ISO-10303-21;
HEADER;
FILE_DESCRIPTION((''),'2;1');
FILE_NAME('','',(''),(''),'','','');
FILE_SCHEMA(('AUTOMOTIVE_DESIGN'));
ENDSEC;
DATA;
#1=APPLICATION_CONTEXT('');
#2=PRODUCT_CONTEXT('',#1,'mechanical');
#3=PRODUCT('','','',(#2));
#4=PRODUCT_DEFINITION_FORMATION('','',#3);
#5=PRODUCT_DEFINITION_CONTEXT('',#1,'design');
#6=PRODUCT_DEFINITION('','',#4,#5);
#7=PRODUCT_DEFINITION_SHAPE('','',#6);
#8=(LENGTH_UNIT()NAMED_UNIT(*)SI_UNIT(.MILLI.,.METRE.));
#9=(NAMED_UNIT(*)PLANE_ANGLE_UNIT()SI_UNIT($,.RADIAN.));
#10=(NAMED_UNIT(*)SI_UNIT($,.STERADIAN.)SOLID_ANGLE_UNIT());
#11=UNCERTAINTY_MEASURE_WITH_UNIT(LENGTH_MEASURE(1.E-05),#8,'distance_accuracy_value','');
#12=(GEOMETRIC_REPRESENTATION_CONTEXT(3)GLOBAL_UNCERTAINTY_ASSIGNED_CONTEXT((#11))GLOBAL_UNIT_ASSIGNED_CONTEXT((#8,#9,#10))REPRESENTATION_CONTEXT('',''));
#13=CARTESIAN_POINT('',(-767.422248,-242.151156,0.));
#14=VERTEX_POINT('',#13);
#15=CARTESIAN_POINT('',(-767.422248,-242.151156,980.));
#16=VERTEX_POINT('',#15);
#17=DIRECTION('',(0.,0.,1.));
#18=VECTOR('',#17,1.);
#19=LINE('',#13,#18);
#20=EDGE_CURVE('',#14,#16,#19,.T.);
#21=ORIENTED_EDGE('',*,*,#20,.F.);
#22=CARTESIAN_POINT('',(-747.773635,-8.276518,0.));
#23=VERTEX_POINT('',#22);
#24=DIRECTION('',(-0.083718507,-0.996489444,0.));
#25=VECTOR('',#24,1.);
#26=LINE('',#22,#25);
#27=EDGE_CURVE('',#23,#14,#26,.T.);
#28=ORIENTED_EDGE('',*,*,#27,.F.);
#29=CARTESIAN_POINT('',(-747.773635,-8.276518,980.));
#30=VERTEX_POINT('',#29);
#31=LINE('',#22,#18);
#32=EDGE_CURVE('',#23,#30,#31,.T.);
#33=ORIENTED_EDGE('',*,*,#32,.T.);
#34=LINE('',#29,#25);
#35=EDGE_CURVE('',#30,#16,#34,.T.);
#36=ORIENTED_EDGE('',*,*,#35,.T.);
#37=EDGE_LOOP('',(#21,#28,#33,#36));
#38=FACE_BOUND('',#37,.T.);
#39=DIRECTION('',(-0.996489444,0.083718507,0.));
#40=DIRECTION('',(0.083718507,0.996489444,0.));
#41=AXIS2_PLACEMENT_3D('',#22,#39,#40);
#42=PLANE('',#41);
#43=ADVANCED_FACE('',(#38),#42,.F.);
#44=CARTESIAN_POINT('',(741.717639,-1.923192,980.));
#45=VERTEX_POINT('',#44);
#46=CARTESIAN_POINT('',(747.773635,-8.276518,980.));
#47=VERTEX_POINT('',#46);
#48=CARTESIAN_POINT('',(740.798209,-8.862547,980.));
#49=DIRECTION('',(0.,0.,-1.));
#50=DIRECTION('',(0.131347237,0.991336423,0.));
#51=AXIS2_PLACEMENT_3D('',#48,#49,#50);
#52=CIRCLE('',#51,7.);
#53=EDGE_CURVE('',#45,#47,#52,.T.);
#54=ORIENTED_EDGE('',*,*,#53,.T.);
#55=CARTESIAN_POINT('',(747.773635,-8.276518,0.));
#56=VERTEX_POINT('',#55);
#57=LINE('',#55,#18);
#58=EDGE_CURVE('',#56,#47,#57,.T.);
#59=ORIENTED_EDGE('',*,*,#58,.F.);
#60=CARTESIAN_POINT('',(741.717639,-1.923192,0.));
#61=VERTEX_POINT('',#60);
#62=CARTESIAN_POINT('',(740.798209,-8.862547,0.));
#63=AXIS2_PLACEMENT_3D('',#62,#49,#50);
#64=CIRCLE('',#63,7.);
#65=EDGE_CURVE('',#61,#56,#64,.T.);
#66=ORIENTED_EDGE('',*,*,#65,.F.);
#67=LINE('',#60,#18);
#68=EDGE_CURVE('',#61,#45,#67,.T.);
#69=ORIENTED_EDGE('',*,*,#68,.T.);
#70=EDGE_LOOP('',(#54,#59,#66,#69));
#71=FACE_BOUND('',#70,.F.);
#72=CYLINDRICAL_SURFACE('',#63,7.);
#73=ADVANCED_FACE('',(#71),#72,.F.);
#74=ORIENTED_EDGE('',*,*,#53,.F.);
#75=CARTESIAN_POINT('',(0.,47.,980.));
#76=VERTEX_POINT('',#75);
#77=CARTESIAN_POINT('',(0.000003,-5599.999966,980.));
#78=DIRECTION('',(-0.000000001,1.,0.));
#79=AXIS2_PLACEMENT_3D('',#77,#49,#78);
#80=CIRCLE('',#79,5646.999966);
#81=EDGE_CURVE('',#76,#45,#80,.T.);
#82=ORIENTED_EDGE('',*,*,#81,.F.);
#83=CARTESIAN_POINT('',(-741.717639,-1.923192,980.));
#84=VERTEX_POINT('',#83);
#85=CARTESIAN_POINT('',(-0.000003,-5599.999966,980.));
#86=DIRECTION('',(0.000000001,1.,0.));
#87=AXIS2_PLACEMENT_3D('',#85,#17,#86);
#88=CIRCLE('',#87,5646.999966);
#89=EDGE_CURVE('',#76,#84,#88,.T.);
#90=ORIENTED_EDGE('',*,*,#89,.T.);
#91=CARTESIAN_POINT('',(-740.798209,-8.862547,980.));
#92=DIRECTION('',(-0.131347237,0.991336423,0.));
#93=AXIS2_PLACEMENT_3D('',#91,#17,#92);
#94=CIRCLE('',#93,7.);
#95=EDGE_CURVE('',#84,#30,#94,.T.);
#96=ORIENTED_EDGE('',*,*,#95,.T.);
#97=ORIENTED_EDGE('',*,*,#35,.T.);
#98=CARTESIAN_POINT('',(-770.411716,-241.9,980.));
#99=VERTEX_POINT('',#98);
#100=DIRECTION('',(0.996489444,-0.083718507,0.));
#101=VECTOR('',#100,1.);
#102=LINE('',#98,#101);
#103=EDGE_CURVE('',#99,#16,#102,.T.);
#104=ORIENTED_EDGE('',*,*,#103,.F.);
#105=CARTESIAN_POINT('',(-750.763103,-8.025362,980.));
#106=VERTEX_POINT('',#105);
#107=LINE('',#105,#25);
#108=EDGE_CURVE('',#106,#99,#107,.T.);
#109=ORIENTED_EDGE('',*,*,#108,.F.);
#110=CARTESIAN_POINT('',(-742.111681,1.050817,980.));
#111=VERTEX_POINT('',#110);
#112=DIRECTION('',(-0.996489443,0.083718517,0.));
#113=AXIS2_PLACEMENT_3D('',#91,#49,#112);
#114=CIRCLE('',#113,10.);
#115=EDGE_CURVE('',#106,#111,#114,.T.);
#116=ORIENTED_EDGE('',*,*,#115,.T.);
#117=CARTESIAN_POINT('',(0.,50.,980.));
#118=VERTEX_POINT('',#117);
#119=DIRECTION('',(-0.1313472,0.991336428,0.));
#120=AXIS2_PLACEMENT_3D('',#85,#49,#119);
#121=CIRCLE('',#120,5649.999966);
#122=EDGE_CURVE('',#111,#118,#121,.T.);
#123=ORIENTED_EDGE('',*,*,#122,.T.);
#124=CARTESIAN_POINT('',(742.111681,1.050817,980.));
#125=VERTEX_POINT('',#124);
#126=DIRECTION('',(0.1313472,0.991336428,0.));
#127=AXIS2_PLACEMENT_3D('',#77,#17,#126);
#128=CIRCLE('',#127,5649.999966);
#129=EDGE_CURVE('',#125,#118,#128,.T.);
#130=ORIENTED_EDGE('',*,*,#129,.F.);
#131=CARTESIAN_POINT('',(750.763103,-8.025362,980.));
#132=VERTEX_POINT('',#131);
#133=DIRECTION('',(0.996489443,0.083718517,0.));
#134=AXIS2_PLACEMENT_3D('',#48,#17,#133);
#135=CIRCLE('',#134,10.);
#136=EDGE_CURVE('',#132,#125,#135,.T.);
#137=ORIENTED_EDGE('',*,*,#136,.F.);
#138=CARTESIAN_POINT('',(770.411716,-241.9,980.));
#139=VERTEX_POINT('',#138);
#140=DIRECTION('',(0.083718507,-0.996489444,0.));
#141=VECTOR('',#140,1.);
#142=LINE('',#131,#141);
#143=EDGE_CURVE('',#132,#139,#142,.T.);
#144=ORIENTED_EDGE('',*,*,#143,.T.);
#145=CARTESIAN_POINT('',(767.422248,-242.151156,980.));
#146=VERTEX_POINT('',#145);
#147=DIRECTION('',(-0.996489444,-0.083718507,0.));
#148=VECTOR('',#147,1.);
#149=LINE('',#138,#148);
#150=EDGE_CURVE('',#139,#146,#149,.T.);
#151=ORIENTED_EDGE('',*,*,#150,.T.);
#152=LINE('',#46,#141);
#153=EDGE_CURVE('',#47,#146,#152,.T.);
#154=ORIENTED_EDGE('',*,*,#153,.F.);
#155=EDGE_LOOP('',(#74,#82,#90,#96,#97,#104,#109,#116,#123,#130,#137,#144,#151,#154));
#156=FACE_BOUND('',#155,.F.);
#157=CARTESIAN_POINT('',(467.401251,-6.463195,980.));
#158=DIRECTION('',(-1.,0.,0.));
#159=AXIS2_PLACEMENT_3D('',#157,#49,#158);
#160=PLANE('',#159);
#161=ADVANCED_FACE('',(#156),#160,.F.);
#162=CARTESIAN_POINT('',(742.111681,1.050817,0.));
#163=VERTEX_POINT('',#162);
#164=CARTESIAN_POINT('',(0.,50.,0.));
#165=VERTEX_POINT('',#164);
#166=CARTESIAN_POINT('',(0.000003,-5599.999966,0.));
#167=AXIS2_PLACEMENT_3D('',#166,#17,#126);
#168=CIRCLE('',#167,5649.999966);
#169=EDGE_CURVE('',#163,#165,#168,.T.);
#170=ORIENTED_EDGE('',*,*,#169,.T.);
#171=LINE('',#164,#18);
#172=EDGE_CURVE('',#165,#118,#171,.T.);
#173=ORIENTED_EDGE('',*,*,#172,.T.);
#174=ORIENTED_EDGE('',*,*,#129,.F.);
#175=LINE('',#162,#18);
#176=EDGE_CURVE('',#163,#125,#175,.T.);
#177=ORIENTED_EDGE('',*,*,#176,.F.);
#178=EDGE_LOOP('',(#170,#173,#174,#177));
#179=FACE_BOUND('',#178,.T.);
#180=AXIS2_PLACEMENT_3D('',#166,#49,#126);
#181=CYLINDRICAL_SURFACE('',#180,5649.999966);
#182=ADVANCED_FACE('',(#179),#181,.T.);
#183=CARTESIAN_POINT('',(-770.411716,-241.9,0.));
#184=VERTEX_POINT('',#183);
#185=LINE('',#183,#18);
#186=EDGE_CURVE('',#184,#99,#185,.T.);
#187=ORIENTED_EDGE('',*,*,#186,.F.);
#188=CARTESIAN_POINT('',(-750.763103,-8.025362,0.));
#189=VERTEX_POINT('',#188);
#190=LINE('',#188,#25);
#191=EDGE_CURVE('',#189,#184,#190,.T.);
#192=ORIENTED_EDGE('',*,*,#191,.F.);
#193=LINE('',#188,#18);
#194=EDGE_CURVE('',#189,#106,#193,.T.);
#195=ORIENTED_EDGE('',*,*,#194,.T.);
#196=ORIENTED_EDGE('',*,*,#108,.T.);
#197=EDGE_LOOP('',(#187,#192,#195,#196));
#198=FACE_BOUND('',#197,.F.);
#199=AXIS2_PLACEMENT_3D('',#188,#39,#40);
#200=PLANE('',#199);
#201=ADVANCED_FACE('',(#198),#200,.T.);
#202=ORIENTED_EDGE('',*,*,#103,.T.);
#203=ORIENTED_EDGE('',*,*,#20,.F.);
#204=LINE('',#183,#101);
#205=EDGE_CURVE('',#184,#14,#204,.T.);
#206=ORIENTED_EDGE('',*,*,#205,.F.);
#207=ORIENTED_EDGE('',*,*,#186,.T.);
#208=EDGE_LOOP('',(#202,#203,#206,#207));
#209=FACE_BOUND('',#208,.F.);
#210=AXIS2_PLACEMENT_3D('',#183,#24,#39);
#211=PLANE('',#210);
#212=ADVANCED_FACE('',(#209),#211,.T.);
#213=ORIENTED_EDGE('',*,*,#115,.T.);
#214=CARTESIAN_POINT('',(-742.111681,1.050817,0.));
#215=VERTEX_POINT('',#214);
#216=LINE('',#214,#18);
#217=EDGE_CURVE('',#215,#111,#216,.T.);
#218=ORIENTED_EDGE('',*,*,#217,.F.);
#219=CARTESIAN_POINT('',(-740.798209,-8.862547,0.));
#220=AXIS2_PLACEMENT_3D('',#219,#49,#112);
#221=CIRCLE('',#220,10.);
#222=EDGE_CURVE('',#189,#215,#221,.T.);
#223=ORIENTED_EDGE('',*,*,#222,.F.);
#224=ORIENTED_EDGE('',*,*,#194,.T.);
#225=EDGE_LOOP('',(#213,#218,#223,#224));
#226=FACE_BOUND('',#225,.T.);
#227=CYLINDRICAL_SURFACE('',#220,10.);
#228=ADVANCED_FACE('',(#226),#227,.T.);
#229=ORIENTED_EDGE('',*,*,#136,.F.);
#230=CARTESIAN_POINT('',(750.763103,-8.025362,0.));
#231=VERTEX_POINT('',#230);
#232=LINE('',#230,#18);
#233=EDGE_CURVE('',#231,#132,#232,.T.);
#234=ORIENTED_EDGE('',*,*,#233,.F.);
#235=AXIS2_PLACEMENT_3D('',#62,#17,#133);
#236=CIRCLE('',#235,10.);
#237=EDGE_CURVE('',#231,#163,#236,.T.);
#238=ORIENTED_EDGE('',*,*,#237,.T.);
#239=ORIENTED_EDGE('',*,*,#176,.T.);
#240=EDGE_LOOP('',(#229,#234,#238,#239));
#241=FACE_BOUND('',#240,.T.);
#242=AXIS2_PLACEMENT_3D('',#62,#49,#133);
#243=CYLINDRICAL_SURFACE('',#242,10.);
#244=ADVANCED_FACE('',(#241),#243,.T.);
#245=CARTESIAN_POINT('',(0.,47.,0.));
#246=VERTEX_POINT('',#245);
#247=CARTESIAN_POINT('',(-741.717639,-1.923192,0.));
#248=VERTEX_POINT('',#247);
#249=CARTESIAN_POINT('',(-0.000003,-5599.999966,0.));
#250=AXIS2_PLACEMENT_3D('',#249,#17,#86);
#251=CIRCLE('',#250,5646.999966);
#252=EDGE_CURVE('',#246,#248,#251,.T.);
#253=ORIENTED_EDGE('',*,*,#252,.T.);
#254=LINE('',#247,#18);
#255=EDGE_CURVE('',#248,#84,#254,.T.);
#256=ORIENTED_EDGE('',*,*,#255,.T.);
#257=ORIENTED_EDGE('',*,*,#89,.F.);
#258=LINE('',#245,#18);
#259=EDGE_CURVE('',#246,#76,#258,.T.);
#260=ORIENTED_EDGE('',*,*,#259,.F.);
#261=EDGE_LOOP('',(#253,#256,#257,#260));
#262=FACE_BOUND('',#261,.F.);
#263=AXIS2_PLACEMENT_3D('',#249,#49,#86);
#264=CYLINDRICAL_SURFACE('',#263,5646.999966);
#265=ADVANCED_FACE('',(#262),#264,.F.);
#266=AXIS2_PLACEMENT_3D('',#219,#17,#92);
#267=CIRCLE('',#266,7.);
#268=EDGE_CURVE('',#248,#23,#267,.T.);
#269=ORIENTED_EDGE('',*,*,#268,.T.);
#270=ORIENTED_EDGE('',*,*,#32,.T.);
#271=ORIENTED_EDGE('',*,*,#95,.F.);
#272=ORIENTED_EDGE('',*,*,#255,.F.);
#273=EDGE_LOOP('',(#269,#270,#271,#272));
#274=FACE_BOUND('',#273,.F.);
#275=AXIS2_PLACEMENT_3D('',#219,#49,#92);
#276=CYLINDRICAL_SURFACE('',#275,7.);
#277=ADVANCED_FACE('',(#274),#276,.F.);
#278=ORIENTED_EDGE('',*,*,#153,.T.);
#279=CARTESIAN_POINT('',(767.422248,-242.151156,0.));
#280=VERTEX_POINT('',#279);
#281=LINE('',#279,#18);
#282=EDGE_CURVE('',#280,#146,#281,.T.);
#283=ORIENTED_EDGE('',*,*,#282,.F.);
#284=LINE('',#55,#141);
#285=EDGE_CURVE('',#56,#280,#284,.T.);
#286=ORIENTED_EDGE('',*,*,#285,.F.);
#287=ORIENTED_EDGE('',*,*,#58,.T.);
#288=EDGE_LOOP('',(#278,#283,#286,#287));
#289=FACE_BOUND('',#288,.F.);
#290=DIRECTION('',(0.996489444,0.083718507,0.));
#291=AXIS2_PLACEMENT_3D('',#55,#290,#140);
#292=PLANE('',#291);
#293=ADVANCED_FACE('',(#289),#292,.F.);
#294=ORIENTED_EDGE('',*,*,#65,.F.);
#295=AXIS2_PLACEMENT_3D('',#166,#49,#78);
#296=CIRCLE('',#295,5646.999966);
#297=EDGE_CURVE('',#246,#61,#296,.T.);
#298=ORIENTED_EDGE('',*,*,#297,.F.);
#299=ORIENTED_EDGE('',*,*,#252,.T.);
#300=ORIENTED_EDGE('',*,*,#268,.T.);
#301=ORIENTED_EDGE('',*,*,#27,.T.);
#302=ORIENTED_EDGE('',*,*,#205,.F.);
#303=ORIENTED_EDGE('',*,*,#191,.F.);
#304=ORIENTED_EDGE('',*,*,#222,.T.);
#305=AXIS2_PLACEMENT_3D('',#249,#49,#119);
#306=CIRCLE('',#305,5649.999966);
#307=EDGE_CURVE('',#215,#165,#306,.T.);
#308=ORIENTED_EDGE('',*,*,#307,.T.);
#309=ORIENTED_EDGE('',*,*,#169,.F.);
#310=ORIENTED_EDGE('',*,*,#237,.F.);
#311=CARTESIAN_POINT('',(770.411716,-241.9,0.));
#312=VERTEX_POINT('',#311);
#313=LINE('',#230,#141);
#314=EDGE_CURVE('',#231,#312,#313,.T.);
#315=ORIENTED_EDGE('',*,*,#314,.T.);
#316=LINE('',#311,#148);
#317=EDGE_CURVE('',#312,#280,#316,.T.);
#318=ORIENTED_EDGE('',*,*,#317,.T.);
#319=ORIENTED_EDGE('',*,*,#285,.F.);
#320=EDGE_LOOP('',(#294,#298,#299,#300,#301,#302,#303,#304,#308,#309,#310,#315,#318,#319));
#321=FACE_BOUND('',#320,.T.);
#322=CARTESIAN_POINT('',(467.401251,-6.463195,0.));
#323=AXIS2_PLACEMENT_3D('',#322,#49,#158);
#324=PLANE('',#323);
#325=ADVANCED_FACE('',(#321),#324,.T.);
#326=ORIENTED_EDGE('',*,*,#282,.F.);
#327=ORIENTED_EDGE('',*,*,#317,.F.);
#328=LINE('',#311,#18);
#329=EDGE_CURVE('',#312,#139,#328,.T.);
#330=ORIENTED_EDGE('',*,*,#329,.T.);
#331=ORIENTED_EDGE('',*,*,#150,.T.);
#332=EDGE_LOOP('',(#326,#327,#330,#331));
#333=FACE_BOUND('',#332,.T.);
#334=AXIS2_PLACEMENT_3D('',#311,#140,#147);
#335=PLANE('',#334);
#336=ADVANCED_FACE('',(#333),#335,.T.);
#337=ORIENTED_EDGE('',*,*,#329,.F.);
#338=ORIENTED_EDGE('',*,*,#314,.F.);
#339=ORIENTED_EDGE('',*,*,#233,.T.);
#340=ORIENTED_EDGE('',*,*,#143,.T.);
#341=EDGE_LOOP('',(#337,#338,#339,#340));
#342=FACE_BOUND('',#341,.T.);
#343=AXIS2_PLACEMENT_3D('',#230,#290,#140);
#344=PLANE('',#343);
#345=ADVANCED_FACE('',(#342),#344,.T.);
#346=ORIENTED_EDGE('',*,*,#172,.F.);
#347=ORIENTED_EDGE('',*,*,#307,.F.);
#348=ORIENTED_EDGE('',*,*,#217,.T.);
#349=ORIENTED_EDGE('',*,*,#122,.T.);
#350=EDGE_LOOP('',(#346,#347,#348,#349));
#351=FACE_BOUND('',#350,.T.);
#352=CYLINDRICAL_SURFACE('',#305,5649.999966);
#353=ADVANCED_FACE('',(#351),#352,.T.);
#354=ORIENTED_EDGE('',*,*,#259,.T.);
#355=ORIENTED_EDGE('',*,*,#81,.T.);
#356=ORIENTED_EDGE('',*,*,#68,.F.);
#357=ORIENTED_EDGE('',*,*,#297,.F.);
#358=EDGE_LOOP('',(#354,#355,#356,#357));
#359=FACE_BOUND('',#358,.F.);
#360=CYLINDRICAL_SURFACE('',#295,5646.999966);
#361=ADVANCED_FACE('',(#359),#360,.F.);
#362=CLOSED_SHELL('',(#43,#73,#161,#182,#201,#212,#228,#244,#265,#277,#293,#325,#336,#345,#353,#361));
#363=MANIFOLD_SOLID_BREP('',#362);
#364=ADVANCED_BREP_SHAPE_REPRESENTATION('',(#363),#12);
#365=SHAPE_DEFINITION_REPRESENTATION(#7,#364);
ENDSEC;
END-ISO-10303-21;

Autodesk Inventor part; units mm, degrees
ref_plane "YZ Plane" through (0, 0, 0) normal (1, 0, 0) x (0, 1, 0)
ref_plane "XZ Plane" through (0, 0, 0) normal (0, 1, 0) x (-1, 0, 0)
ref_plane "XY Plane" through (0, 0, 0) normal (0, 0, 1) x (1, 0, 0)
sketch "Sketch1" plane through (0, 0, 0) normal (0, 0, 1) x (1, 0, 0)
  line L0 (-750, 0) -> (750, 0) construction
  line L1 (750, 0) -> (750, -2700) construction
  line L2 (750, -2700) -> (-750, -2700) construction
  line L3 (-750, -2700) -> (-750, 0) construction
  line L4 (800, 50) -> (-800, 50) construction
  line L5 (-800, 50) -> (-800, -2750) construction
  line L6 (-800, -2750) -> (800, -2750) construction
  line L7 (800, -2750) -> (800, 50) construction
  line L8 (-850, 100) -> (850, 100) construction
  line L9 (850, 100) -> (850, -2800) construction
  line L10 (850, -2800) -> (-850, -2800) construction
  line L11 (-850, -2800) -> (-850, 100) construction
  arc A0 (750, 0) -> (742.111681, 1.050817) centre (0, -5600) ccw construction
  line L12 (-750, -2100) -> (750, -2100) construction
  line L13 (115.485997, -2697.8227) -> (750, -2100) construction
  arc A1 (750, -2100) -> (750, 0) centre (-10250, -1050) ccw construction
  arc A2 (110, -2700) -> (115.485997, -2697.8227) centre (110, -2692) ccw construction
  arc A3 (742.111681, 1.050817) -> (0, 50) centre (0, -5600) ccw
  line L14 (0, 100) -> (0, 50) construction
  line L15 (0, -2700) -> (0, -2697) construction
  line L16 (0, 47) -> (0, 0) construction
  line L17 (0, 50) -> (0, 47) construction
  line L18 (750.763103, -8.025362) -> (770.411716, -241.9)
  arc A4 (750.763103, -8.025362) -> (742.111681, 1.050817) centre (740.798209, -8.862547) ccw
  point P0 (0, -2750)
  dimension "d54" = 1500
  dimension "d55" = 2700
  dimension "d58" = 2100
  dimension "d83" = 8
  dimension "d113" = 50
  dimension "d114" = 50
  dimension "d115" = 3
  dimension "d121" = 10
  dimension "d122" = 241.9
contour flange "Contour Flange2" sketch "Sketch1" thickness 3 bend radius 5 width 980 along (0, 0, 1) mid plane no both sides no wall seen from (760.58741, -124.962681, 0) lies toward (-0.9964894, -0.0837185, 0) curves L18 A4 A3
bend "Bend2"
corner "Corner2"
mirror "Mirror2" about plane through (0, 0, 0) normal (1, 0, 0)
sketch "Sketch2" plane through (747.773635, -8.276518, 0) normal (-0.9964894, -0.0837185, 0) x (0, 0, 1)
  line L0 (972.134927, -233.668955) -> (922.247175, -233.668955) construction
  line L1 (922.247175, -233.668955) -> (922.247175, -228.951234) construction
  line L2 (922.247175, -228.951234) -> (972.134927, -228.951234) construction
  line L3 (972.134927, -228.951234) -> (972.134927, -233.668955) construction
  point P0 (0, 70.849954)
mark "Mark1"
equation "\"d36\" = Thickness"
equation "\"d37\" = BendReliefWidth"
equation "\"d38\" = BendReliefDepth"
equation "\"d39\" = MinimumRemnant"
equation "\"d40\" = TransitionRadius"
equation "\"d42\" = BendRadius"
equation "\"d44\" = CornerReliefSize"
equation "\"d45\" = GapSize"
equation "\"d46\" = JacobiRadiusSize"
equation "\"BendReliefWidth\" = Thickness"
equation "\"BendReliefDepth\" = 0.5 * Thickness"
equation "\"CornerReliefSize\" = 4 * Thickness"
equation "\"MinimumRemnant\" = 2 * Thickness"
equation "\"GapSize\" = Thickness"
equation "\"Thickness\" = 3"
equation "\"TransitionRadius\" = 5"
equation "\"BendRadius\" = 5"
equation "\"JacobiRadiusSize\" = 5"
properties part number "MSC 201 sheet back basic" material "Stainless Steel AISI 304"
